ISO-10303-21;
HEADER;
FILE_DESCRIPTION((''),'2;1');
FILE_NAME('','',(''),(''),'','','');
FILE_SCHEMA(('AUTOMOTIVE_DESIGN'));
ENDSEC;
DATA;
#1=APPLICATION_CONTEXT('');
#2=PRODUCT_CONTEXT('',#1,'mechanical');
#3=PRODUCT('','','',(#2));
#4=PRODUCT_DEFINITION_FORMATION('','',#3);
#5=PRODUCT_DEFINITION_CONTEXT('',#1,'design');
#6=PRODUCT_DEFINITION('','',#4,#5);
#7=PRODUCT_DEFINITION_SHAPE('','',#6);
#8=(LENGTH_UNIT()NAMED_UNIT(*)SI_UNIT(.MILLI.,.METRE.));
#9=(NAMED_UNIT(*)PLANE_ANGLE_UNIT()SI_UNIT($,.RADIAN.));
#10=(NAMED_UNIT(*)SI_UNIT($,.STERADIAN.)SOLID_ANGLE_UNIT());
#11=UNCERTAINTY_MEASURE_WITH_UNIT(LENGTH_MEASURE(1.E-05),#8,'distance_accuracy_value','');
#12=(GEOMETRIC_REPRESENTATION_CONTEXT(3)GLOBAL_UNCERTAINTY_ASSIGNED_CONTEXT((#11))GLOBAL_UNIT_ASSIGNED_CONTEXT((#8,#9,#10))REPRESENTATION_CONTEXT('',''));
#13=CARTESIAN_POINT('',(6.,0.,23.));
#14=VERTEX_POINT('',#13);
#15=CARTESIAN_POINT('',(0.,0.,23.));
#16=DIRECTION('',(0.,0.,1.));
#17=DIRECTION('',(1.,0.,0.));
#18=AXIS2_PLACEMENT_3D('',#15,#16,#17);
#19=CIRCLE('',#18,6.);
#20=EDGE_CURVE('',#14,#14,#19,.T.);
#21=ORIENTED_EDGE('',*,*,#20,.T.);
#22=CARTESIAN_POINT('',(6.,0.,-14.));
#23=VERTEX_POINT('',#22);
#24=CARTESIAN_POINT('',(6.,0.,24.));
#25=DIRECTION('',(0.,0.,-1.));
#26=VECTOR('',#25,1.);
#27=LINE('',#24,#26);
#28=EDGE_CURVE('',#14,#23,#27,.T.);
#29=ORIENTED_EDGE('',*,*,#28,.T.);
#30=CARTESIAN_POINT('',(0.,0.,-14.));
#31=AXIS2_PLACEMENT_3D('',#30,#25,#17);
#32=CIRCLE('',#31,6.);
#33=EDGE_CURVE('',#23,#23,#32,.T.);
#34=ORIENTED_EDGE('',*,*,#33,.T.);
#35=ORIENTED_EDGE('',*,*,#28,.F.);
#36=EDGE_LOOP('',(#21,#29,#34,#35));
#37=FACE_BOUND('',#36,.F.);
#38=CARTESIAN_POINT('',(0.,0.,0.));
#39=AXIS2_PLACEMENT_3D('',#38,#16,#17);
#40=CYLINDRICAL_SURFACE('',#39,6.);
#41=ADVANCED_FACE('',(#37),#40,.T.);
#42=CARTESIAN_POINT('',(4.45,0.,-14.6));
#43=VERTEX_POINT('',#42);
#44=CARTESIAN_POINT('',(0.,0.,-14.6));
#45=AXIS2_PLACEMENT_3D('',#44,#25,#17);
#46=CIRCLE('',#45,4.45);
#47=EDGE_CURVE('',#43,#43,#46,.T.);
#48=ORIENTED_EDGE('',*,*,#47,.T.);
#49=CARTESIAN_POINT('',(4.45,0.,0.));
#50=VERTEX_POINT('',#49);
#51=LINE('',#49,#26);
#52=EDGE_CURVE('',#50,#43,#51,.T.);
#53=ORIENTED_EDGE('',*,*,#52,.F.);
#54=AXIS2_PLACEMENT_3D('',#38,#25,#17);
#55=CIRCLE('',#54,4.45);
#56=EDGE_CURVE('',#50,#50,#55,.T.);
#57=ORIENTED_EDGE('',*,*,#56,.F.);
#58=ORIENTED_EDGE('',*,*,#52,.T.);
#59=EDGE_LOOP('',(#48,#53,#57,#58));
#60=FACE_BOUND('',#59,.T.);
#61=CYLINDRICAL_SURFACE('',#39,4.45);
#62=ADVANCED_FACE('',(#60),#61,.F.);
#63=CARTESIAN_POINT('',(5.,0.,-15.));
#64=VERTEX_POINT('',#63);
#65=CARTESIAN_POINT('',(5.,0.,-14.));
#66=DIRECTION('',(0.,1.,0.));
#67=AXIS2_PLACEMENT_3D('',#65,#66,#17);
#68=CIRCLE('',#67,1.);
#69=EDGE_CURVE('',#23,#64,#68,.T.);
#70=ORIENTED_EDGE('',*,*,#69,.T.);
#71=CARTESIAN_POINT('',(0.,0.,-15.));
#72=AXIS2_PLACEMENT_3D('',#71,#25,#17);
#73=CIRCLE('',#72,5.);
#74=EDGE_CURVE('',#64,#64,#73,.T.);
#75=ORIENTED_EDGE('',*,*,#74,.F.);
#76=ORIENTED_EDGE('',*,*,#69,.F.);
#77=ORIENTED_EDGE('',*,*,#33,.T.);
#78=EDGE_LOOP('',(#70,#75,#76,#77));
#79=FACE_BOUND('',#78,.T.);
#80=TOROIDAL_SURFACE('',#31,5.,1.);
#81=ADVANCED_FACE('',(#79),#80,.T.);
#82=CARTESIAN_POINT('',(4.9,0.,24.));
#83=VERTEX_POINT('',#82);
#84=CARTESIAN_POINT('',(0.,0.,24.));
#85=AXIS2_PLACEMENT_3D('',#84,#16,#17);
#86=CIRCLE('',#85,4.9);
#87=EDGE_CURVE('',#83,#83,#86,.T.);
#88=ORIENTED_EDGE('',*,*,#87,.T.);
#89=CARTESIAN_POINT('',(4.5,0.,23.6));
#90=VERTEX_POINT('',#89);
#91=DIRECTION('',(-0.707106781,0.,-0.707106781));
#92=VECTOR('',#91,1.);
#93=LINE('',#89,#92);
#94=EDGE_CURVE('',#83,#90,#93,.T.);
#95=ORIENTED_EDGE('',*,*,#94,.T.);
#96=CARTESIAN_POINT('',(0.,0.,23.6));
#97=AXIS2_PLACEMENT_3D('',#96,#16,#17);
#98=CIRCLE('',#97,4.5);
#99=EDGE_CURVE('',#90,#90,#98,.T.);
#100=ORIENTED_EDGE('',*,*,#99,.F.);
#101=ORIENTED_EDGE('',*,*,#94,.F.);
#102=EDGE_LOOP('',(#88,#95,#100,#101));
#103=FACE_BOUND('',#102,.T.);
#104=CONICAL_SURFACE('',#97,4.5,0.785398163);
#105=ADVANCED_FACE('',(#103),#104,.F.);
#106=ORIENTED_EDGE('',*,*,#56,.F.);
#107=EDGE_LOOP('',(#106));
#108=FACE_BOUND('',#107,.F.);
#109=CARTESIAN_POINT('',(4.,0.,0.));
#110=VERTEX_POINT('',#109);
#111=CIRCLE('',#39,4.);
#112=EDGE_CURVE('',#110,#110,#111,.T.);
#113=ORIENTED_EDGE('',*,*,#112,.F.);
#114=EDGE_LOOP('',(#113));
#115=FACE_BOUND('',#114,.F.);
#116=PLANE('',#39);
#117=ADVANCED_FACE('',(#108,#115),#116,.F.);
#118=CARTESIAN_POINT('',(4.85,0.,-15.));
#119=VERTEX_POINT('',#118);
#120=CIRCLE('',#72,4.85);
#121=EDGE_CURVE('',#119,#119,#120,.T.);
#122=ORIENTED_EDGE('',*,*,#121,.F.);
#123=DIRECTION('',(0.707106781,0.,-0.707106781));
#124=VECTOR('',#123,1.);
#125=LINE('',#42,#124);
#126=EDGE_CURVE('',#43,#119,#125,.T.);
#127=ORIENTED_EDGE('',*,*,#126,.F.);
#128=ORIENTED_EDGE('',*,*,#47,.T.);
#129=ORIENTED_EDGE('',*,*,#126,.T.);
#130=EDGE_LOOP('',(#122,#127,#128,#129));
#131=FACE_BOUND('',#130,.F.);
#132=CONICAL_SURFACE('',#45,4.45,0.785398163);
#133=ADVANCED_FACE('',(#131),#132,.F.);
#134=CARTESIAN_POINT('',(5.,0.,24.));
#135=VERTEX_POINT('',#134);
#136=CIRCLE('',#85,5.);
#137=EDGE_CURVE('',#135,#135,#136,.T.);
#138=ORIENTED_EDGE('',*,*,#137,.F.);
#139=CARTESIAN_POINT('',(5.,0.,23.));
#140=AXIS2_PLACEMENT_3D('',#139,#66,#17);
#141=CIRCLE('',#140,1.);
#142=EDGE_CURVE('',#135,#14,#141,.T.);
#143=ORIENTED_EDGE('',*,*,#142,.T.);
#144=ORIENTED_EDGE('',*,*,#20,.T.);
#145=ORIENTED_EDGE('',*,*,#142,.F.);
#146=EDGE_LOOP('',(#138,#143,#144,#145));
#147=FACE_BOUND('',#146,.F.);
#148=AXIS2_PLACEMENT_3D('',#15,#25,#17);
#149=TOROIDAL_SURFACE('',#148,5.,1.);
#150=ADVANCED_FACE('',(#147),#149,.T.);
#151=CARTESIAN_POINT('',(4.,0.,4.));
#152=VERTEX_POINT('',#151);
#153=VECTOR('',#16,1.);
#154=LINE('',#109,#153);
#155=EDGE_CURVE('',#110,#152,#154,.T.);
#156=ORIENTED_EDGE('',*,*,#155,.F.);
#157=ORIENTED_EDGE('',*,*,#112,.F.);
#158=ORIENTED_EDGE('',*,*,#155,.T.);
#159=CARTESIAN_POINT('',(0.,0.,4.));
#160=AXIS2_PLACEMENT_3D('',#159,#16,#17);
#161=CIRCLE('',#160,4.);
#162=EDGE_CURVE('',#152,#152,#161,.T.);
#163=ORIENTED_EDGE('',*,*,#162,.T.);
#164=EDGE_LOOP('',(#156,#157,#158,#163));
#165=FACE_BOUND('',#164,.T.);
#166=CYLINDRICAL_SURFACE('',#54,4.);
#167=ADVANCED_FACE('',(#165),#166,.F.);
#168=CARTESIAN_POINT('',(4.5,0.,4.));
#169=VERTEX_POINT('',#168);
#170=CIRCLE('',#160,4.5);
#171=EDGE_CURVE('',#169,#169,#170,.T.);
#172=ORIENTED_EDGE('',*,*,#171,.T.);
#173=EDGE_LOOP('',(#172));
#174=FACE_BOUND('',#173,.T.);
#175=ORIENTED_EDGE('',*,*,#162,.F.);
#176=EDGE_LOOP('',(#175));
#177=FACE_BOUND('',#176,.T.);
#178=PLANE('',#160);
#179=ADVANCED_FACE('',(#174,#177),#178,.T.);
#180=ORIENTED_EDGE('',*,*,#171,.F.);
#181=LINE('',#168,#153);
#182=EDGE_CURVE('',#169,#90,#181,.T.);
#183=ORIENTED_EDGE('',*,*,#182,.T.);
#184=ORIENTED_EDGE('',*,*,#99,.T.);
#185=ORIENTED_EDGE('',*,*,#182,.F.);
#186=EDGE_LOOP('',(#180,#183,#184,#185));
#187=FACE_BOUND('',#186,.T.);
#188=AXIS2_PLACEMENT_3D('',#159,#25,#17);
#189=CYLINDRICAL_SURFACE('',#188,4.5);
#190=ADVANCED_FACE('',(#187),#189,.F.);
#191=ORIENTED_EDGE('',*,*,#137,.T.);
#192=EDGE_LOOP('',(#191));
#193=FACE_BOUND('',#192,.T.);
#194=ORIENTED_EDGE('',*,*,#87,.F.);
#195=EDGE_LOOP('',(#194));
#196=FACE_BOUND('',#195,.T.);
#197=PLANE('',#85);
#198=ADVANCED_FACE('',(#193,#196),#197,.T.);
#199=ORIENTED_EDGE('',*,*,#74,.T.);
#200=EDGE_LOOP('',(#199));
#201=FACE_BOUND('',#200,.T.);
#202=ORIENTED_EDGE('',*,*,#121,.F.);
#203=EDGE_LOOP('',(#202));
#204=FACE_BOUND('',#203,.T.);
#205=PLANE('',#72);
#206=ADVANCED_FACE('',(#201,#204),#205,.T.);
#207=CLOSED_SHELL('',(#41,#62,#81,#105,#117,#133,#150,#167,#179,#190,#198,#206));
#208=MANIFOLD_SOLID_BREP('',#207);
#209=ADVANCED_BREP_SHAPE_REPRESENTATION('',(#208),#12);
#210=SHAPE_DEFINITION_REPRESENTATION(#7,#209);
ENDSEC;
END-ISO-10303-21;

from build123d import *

# Parameters (mm, degrees)
F0_R     = 6
F0_R_2   = 4
F1_DEPTH = 4
F2_DEPTH = 4
F3_R     = 6
F3_R_2   = 4.5
F4_DEPTH = 20
F5_R     = 6
F5_R_2   = 4.45
F6_DEPTH = 15
F7_SIZE  = 0.4
F8_R     = 1


with BuildPart() as f1:
    # F0 (on Top) → F1 (new body)
    with BuildSketch(Plane.XY):
        Circle(F0_R)
        Circle(F0_R_2, mode=Mode.SUBTRACT)
    extrude(amount=F1_DEPTH)

    # F0 (on Top) → F2 (join)
    with BuildSketch(Plane.XY):
        Circle(F0_R)
        Circle(F0_R_2, mode=Mode.SUBTRACT)
    extrude(amount=F2_DEPTH)

    # F3 (on face) → F4 (join)
    with BuildSketch(Plane.XY.offset(4)):
        Circle(F3_R)
        Circle(F3_R_2, mode=Mode.SUBTRACT)
    extrude(amount=F4_DEPTH)

    # F5 (on face) → F6 (join)
    with BuildSketch(Plane(origin=(0, 0, 0), x_dir=(1, 0, 0), z_dir=(0, 0, -1))):
        Circle(F5_R)
        Circle(F5_R_2, mode=Mode.SUBTRACT)
    extrude(amount=F6_DEPTH)

    # F7
    f7_edges = [f1.edges().sort_by_distance(p)[0] for p in [
        (-4.45, 0, -15),
        (-4.5, 0, 24),
    ]]
    chamfer(f7_edges, length=F7_SIZE)

    # F8
    f8_edges = [f1.edges().sort_by_distance(p)[0] for p in [
        (-6, 0, 24),
        (-6, 0, -15),
    ]]
    fillet(f8_edges, radius=F8_R)


solid = f1.part
